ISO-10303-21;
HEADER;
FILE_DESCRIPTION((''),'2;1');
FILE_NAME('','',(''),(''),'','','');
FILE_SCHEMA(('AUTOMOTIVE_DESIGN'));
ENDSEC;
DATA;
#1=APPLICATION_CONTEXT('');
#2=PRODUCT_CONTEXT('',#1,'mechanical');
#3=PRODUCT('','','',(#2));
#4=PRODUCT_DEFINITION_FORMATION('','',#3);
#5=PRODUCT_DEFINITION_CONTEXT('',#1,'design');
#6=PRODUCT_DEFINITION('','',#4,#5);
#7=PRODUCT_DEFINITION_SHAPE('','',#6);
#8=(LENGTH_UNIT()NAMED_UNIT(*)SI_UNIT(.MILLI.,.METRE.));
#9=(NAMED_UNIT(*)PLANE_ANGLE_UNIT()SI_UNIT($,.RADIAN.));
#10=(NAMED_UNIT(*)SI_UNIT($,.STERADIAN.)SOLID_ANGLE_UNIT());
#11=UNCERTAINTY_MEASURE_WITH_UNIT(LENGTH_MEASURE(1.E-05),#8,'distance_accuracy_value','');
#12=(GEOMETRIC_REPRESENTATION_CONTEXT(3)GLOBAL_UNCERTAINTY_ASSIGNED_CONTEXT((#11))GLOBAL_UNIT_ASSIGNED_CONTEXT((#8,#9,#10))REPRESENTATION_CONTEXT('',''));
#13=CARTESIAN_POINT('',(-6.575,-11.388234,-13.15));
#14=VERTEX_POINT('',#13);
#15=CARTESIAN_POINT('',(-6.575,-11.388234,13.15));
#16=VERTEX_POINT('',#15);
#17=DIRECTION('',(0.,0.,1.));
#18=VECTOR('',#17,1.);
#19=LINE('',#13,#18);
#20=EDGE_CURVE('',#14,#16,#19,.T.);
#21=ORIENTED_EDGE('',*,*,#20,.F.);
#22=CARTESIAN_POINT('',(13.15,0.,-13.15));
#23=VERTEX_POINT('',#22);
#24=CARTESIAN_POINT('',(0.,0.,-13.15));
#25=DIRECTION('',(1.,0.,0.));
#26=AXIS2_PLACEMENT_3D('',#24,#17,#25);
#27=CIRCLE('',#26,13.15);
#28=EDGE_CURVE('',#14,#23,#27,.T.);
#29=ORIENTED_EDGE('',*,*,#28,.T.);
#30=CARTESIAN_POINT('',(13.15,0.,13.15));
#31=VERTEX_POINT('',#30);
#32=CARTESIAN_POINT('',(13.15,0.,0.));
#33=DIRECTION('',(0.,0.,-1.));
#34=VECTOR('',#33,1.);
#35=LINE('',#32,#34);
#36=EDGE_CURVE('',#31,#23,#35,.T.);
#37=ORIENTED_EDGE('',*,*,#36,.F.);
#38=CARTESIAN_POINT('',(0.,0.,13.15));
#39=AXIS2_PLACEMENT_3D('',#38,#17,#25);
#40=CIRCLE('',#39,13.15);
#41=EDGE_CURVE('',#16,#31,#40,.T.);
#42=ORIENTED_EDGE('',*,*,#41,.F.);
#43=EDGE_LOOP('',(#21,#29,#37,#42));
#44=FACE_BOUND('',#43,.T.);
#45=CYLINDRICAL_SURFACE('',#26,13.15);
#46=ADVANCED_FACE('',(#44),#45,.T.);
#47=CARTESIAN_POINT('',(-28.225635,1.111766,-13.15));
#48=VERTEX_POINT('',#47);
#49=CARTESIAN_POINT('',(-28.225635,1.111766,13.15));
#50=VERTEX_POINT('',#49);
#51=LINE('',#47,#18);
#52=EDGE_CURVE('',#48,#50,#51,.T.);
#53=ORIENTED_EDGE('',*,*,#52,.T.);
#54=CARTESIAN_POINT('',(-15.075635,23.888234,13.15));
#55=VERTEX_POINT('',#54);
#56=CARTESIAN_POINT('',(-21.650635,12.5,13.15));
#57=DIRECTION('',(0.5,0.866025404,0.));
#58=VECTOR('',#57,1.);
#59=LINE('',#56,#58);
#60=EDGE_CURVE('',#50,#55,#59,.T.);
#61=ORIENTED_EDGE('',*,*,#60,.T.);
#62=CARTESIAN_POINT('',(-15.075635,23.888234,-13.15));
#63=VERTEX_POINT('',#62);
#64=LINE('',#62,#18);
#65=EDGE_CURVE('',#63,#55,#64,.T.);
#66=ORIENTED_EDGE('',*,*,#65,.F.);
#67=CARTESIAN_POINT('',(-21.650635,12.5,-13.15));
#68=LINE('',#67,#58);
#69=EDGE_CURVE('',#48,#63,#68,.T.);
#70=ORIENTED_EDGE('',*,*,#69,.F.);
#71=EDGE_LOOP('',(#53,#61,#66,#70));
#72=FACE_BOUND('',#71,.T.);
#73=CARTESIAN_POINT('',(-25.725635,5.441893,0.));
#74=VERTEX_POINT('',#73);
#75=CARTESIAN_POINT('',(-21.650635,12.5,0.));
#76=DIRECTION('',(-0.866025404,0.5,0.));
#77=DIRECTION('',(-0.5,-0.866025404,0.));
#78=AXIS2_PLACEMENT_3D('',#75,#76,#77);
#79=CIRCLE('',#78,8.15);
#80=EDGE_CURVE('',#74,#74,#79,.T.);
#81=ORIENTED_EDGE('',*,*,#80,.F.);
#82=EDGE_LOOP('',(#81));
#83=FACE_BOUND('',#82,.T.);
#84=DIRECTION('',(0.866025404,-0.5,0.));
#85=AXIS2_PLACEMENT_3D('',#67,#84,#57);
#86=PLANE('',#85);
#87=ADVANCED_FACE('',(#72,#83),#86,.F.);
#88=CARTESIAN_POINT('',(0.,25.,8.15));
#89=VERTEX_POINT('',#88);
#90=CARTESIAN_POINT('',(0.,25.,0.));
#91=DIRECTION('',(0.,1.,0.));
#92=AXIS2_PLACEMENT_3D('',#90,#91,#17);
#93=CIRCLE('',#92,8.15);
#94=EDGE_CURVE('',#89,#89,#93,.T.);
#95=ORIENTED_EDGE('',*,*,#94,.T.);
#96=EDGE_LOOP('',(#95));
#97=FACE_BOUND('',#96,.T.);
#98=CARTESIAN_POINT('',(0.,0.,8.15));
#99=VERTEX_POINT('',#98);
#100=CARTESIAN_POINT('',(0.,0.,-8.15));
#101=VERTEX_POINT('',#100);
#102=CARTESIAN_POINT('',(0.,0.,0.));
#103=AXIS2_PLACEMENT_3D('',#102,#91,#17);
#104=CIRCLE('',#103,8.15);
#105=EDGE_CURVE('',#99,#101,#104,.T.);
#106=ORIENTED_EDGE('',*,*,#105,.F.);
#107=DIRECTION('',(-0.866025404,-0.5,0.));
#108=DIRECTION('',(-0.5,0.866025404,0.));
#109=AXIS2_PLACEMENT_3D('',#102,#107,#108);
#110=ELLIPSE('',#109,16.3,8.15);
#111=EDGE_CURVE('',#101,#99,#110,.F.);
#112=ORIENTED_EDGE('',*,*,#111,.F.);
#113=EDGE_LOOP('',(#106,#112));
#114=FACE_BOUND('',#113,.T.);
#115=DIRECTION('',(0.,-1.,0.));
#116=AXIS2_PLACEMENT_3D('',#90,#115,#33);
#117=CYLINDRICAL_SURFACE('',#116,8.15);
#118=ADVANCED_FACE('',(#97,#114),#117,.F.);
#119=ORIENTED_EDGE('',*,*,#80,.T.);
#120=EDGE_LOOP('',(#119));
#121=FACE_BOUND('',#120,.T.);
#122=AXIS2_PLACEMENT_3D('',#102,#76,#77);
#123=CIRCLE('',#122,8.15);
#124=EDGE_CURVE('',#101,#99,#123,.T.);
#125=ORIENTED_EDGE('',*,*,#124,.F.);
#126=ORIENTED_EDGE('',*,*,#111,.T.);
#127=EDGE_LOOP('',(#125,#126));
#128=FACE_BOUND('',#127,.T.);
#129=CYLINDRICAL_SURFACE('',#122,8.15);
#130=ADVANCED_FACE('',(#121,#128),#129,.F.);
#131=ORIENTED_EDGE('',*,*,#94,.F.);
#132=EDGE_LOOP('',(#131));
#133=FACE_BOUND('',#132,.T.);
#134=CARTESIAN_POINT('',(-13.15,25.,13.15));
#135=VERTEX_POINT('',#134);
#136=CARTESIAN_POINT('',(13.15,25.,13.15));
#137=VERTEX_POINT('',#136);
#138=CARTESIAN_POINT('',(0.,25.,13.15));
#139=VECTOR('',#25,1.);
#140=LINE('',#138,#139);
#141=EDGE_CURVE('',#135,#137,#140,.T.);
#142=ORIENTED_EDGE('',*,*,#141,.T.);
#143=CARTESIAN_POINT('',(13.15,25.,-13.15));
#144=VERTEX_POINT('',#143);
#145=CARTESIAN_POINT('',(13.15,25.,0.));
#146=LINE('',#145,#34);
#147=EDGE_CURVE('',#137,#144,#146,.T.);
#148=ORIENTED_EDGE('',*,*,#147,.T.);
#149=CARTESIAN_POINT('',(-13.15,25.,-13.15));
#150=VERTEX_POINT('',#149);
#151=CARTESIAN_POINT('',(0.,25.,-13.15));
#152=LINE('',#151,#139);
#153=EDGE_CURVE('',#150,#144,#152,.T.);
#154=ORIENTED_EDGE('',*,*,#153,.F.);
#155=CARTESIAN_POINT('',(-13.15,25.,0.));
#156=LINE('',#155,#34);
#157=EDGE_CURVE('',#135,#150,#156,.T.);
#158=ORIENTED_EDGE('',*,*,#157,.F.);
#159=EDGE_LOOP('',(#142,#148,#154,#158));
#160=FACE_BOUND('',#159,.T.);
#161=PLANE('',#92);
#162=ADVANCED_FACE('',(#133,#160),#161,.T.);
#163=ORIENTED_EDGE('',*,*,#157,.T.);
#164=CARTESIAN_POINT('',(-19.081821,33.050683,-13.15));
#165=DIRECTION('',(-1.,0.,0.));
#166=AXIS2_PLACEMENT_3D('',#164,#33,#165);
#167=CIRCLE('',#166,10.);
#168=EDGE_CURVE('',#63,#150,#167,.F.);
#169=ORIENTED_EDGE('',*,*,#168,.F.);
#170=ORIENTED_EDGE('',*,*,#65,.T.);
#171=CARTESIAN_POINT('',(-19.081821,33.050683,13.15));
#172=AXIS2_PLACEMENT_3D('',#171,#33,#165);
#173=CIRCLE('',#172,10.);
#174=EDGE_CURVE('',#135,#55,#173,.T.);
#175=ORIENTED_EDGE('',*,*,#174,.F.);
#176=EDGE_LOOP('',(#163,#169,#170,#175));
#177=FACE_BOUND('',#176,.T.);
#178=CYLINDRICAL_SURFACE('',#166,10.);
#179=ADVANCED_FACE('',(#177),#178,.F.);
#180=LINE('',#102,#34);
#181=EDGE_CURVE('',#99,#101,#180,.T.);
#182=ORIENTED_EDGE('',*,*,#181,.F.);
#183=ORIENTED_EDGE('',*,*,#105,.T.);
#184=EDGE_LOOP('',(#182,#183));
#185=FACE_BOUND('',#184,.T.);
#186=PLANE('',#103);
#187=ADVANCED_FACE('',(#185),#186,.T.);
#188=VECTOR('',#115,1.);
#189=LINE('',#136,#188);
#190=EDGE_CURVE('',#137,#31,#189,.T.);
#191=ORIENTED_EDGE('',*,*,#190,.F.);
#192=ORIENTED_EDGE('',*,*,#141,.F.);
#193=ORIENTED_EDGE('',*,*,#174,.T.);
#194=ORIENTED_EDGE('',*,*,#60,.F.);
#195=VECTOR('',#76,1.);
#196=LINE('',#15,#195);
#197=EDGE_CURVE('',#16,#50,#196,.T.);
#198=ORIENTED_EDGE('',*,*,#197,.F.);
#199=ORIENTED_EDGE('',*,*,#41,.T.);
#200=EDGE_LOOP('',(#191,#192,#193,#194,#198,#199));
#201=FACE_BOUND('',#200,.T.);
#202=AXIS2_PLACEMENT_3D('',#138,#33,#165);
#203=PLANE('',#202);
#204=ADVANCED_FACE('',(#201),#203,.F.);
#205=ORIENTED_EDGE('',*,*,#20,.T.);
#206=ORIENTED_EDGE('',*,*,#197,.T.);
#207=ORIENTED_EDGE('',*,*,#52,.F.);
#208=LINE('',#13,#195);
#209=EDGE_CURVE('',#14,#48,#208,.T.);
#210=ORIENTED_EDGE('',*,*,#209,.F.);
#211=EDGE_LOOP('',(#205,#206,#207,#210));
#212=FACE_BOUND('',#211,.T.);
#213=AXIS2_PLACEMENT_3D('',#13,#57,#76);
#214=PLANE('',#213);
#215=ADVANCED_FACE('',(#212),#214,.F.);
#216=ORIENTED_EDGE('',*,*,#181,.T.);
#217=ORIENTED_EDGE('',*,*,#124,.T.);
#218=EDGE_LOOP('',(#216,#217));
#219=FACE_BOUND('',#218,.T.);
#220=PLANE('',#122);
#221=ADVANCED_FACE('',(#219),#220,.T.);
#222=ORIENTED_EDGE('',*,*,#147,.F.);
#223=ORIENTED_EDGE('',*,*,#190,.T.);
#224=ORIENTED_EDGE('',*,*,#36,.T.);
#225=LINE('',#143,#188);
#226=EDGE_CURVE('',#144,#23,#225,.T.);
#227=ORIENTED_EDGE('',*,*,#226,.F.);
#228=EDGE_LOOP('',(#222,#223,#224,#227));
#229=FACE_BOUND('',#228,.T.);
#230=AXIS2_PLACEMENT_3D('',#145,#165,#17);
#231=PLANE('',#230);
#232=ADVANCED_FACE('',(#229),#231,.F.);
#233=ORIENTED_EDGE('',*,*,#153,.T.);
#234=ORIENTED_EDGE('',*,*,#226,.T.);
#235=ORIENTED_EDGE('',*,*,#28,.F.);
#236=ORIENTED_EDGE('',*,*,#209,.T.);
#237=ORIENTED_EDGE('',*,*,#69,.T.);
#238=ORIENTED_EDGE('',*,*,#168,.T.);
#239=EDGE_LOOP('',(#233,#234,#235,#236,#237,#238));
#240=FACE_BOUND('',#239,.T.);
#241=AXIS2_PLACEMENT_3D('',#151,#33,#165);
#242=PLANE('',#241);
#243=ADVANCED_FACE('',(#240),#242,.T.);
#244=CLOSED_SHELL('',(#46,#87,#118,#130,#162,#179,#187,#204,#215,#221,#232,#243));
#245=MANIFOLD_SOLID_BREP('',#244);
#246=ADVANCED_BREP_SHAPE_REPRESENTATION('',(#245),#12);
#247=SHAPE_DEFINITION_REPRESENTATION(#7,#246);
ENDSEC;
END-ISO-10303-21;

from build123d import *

# Parameters (mm, degrees)
SKETCH2_R                = 13.15
SKETCH2_R_2              = 8.15
BOSS_EXTRUDE1_DEPTH      = 25
BOSS_EXTRUDE2_DEPTH      = 13.15
BOSS_EXTRUDE2_DEPTH_BACK = 13.15
SKETCH4_R                = 8.15
CUT_EXTRUDE1_DEPTH       = 25
CUT_EXTRUDE2_START       = -25
SKETCH5_R                = 8.15
CUT_EXTRUDE2_DEPTH       = 25
FILLET1_R                = 10


with BuildPart() as part:
    # Sketch2 → Boss-Extrude1 (new body)
    # profile 1 of 5: a face of its own
    with BuildSketch(Plane(origin=(0, 0, 0), x_dir=(1, 0, 0), z_dir=(0, 1, 0))):
        with BuildLine():
            Line((-13.15, 13.15), (-13.15, 0))
            ThreePointArc((-13.15, 0), (-9.298454179, 9.298454166), (-1.9e-08, 13.15))
            Line((-1.9e-08, 13.15), (-13.15, 13.15))
        make_face()
    # profile 2 of 5: a face of its own
    with BuildSketch(Plane(origin=(0, 0, 0), x_dir=(1, 0, 0), z_dir=(0, 1, 0))):
        Circle(SKETCH2_R)
        with Locations(Location((0, 0, 0), (0, 0, 270))):
            Circle(SKETCH2_R_2, mode=Mode.SUBTRACT)
    # profile 3 of 5: a face of its own
    with BuildSketch(Plane(origin=(0, 0, 0), x_dir=(1, 0, 0), z_dir=(0, 1, 0))):
        with BuildLine():
            ThreePointArc((-1.9e-08, 13.15), (9.298454166, 9.298454179), (13.15, 0))
            Line((13.15, 0), (13.15, 13.15))
            Line((13.15, 13.15), (-1.9e-08, 13.15))
        make_face()
    # profile 4 of 5: a face of its own
    with BuildSketch(Plane(origin=(0, 0, 0), x_dir=(1, 0, 0), z_dir=(0, 1, 0))):
        with BuildLine():
            ThreePointArc((13.15, 0), (9.298454189, -9.298454156), (4.6e-08, -13.15))
            Line((4.6e-08, -13.15), (13.15, -13.15))
            Line((13.15, -13.15), (13.15, 0))
        make_face()
    # profile 5 of 5: a face of its own
    with BuildSketch(Plane(origin=(0, 0, 0), x_dir=(1, 0, 0), z_dir=(0, 1, 0))):
        with BuildLine():
            Line((-13.15, 0), (-13.15, -13.15))
            Line((-13.15, -13.15), (4.6e-08, -13.15))
            ThreePointArc((4.6e-08, -13.15), (-9.298454156, -9.298454189), (-13.15, 0))
        make_face()
    extrude(amount=BOSS_EXTRUDE1_DEPTH)

    # Sketch3 → Boss-Extrude2 (add, two sides: drawn at the far end of the back side and taken through both)
    with BuildSketch(Plane.XY.offset(-BOSS_EXTRUDE2_DEPTH_BACK)):
        with BuildLine():
            Line((-28.225635095, 1.11176594), (-6.575, -11.38823406))
            ThreePointArc((-6.575, -11.38823406), (11.38823406, -6.575), (6.575, 11.38823406))
            Line((6.575, 11.38823406), (-15.075635095, 23.88823406))
            Line((-15.075635095, 23.88823406), (-28.225635095, 1.11176594))
        make_face()
    extrude(amount=BOSS_EXTRUDE2_DEPTH + BOSS_EXTRUDE2_DEPTH_BACK)

    # Sketch4 → Cut-Extrude1 (cut)
    with BuildSketch(Plane(origin=(-21.650635095, 12.5, 0), x_dir=(0, 0, 1), z_dir=(-0.8660254037844418, 0.49999999999999445, 0))):
        with Locations(Location((0, 0, 0), (0, 0, 270))):
            Circle(SKETCH4_R)
    extrude(amount=-CUT_EXTRUDE1_DEPTH, mode=Mode.SUBTRACT)

    # Sketch5 → Cut-Extrude2 (cut)
    with BuildSketch(Plane(origin=(0, 25, 0), x_dir=(1, 0, 0), z_dir=(0, 1, 0)).offset(CUT_EXTRUDE2_START)):
        with Locations(Location((0, 0, 0), (0, 0, 270))):
            Circle(SKETCH5_R)
    extrude(amount=CUT_EXTRUDE2_DEPTH, mode=Mode.SUBTRACT)

    # Fillet1
    # the kernel refuses this fillet: 10 mm, written as the material it adds along each edge
    with BuildSketch(Plane(origin=(-13.15, 22.77646812, 13.15), x_dir=(0, 1, 0), z_dir=(0, 0, -1))) as fillet1_piece_1:
        with BuildLine():
            CenterArc((10.274215146, -5.93182088), FILLET1_R, 143.616854507, 12.766290987)
            Line((1.11176594, -1.925635095), (0, 0))
            Line((0, 0), (2.22353188, 0))
        make_face()
    extrude(amount=26.3)


solid = part.part
